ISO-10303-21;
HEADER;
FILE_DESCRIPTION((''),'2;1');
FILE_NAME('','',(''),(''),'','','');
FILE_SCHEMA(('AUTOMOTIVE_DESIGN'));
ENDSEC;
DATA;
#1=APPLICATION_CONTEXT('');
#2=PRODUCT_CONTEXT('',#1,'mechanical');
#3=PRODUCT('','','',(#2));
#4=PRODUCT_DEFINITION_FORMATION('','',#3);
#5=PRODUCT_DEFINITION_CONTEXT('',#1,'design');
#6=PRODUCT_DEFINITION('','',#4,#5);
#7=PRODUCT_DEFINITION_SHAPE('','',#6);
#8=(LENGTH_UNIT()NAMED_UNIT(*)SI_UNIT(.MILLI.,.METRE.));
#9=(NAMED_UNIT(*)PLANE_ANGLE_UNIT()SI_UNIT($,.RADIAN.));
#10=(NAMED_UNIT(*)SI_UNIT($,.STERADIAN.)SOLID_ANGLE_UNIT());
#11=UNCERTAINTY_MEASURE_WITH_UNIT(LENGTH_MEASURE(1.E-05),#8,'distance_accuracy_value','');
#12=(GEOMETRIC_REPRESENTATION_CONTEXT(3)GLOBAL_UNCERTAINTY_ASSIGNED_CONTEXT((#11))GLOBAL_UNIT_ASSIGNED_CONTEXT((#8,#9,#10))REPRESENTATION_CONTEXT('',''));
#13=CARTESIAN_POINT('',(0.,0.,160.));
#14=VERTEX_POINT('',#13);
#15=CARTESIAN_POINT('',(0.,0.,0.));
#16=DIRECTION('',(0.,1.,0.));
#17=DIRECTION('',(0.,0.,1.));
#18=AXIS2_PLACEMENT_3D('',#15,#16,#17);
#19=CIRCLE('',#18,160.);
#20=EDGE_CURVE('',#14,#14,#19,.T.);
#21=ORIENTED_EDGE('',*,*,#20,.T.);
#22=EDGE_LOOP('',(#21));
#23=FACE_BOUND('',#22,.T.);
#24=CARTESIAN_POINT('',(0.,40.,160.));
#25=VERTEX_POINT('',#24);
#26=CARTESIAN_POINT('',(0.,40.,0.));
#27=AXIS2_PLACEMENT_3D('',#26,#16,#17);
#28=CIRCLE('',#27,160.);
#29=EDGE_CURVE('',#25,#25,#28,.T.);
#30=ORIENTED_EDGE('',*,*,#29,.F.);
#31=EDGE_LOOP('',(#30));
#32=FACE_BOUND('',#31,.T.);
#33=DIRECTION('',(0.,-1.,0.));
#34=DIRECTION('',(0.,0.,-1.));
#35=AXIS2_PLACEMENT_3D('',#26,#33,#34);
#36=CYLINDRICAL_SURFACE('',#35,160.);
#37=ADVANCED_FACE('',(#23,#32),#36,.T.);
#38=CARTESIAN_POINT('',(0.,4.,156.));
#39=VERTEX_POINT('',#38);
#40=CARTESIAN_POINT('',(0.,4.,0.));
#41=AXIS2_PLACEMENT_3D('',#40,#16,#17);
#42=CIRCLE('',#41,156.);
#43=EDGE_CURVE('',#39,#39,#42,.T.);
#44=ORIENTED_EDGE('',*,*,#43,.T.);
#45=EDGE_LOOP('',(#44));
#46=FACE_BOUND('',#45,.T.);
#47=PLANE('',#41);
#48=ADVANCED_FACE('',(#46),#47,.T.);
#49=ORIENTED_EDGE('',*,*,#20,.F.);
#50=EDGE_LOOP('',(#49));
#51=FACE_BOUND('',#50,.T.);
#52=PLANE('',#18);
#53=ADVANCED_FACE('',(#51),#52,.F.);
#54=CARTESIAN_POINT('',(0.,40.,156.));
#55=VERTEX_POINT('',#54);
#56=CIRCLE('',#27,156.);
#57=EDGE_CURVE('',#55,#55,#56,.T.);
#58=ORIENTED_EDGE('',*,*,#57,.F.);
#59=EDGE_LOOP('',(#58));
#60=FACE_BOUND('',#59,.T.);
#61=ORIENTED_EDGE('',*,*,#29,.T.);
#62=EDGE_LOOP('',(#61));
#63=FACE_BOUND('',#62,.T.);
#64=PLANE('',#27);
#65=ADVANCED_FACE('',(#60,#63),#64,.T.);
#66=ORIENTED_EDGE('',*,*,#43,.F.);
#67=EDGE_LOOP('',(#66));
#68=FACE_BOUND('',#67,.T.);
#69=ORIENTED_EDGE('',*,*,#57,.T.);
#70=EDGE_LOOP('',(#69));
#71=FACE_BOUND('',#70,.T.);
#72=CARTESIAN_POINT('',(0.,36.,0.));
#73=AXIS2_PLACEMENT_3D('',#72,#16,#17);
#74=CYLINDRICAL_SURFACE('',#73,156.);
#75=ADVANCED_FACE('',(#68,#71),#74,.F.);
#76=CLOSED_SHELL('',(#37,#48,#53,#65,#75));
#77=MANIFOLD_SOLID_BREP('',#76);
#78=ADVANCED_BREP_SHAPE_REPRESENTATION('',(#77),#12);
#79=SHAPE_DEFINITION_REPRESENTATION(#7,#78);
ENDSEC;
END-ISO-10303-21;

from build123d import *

# Parameters (mm, degrees)
ESQUISSE1_R             = 160
BOSS_EXTRU_1_DEPTH      = 40
ESQUISSE2_R             = 156
ENL_V_MAT_EXTRU_1_DEPTH = 4
COQUE2_START            = 4
COQUE2_OUTLINE_R        = 156
COQUE2_DEPTH            = 32


# Read off the part's stored shape, not the designer's step: Coque2
with BuildPart() as part:
    # Esquisse1 → Boss.-Extru.1 (new body)
    with BuildSketch(Plane(origin=(0, 0, 0), x_dir=(1, 0, 0), z_dir=(0, 1, 0))):
        with Locations(Location((0, 0, 0), (0, 0, 270))):
            Circle(ESQUISSE1_R)
    extrude(amount=BOSS_EXTRU_1_DEPTH)

    # Esquisse2 → Enlèv. mat.-Extru.1 (cut)
    with BuildSketch(Plane(origin=(0, 40, 0), x_dir=(1, 0, 0), z_dir=(0, 1, 0))):
        with Locations(Location((0, 0, 0), (0, 0, 270))):
            Circle(ESQUISSE2_R)
    extrude(amount=-ENL_V_MAT_EXTRU_1_DEPTH, mode=Mode.SUBTRACT)

    # Coque2 outline → Coque2 (cut)
    with BuildSketch(Plane(origin=(0, 0, 0), x_dir=(1, 0, 0), z_dir=(0, 1, 0)).offset(COQUE2_START)):
        Circle(COQUE2_OUTLINE_R)
    extrude(amount=COQUE2_DEPTH, mode=Mode.SUBTRACT)


solid = part.part
